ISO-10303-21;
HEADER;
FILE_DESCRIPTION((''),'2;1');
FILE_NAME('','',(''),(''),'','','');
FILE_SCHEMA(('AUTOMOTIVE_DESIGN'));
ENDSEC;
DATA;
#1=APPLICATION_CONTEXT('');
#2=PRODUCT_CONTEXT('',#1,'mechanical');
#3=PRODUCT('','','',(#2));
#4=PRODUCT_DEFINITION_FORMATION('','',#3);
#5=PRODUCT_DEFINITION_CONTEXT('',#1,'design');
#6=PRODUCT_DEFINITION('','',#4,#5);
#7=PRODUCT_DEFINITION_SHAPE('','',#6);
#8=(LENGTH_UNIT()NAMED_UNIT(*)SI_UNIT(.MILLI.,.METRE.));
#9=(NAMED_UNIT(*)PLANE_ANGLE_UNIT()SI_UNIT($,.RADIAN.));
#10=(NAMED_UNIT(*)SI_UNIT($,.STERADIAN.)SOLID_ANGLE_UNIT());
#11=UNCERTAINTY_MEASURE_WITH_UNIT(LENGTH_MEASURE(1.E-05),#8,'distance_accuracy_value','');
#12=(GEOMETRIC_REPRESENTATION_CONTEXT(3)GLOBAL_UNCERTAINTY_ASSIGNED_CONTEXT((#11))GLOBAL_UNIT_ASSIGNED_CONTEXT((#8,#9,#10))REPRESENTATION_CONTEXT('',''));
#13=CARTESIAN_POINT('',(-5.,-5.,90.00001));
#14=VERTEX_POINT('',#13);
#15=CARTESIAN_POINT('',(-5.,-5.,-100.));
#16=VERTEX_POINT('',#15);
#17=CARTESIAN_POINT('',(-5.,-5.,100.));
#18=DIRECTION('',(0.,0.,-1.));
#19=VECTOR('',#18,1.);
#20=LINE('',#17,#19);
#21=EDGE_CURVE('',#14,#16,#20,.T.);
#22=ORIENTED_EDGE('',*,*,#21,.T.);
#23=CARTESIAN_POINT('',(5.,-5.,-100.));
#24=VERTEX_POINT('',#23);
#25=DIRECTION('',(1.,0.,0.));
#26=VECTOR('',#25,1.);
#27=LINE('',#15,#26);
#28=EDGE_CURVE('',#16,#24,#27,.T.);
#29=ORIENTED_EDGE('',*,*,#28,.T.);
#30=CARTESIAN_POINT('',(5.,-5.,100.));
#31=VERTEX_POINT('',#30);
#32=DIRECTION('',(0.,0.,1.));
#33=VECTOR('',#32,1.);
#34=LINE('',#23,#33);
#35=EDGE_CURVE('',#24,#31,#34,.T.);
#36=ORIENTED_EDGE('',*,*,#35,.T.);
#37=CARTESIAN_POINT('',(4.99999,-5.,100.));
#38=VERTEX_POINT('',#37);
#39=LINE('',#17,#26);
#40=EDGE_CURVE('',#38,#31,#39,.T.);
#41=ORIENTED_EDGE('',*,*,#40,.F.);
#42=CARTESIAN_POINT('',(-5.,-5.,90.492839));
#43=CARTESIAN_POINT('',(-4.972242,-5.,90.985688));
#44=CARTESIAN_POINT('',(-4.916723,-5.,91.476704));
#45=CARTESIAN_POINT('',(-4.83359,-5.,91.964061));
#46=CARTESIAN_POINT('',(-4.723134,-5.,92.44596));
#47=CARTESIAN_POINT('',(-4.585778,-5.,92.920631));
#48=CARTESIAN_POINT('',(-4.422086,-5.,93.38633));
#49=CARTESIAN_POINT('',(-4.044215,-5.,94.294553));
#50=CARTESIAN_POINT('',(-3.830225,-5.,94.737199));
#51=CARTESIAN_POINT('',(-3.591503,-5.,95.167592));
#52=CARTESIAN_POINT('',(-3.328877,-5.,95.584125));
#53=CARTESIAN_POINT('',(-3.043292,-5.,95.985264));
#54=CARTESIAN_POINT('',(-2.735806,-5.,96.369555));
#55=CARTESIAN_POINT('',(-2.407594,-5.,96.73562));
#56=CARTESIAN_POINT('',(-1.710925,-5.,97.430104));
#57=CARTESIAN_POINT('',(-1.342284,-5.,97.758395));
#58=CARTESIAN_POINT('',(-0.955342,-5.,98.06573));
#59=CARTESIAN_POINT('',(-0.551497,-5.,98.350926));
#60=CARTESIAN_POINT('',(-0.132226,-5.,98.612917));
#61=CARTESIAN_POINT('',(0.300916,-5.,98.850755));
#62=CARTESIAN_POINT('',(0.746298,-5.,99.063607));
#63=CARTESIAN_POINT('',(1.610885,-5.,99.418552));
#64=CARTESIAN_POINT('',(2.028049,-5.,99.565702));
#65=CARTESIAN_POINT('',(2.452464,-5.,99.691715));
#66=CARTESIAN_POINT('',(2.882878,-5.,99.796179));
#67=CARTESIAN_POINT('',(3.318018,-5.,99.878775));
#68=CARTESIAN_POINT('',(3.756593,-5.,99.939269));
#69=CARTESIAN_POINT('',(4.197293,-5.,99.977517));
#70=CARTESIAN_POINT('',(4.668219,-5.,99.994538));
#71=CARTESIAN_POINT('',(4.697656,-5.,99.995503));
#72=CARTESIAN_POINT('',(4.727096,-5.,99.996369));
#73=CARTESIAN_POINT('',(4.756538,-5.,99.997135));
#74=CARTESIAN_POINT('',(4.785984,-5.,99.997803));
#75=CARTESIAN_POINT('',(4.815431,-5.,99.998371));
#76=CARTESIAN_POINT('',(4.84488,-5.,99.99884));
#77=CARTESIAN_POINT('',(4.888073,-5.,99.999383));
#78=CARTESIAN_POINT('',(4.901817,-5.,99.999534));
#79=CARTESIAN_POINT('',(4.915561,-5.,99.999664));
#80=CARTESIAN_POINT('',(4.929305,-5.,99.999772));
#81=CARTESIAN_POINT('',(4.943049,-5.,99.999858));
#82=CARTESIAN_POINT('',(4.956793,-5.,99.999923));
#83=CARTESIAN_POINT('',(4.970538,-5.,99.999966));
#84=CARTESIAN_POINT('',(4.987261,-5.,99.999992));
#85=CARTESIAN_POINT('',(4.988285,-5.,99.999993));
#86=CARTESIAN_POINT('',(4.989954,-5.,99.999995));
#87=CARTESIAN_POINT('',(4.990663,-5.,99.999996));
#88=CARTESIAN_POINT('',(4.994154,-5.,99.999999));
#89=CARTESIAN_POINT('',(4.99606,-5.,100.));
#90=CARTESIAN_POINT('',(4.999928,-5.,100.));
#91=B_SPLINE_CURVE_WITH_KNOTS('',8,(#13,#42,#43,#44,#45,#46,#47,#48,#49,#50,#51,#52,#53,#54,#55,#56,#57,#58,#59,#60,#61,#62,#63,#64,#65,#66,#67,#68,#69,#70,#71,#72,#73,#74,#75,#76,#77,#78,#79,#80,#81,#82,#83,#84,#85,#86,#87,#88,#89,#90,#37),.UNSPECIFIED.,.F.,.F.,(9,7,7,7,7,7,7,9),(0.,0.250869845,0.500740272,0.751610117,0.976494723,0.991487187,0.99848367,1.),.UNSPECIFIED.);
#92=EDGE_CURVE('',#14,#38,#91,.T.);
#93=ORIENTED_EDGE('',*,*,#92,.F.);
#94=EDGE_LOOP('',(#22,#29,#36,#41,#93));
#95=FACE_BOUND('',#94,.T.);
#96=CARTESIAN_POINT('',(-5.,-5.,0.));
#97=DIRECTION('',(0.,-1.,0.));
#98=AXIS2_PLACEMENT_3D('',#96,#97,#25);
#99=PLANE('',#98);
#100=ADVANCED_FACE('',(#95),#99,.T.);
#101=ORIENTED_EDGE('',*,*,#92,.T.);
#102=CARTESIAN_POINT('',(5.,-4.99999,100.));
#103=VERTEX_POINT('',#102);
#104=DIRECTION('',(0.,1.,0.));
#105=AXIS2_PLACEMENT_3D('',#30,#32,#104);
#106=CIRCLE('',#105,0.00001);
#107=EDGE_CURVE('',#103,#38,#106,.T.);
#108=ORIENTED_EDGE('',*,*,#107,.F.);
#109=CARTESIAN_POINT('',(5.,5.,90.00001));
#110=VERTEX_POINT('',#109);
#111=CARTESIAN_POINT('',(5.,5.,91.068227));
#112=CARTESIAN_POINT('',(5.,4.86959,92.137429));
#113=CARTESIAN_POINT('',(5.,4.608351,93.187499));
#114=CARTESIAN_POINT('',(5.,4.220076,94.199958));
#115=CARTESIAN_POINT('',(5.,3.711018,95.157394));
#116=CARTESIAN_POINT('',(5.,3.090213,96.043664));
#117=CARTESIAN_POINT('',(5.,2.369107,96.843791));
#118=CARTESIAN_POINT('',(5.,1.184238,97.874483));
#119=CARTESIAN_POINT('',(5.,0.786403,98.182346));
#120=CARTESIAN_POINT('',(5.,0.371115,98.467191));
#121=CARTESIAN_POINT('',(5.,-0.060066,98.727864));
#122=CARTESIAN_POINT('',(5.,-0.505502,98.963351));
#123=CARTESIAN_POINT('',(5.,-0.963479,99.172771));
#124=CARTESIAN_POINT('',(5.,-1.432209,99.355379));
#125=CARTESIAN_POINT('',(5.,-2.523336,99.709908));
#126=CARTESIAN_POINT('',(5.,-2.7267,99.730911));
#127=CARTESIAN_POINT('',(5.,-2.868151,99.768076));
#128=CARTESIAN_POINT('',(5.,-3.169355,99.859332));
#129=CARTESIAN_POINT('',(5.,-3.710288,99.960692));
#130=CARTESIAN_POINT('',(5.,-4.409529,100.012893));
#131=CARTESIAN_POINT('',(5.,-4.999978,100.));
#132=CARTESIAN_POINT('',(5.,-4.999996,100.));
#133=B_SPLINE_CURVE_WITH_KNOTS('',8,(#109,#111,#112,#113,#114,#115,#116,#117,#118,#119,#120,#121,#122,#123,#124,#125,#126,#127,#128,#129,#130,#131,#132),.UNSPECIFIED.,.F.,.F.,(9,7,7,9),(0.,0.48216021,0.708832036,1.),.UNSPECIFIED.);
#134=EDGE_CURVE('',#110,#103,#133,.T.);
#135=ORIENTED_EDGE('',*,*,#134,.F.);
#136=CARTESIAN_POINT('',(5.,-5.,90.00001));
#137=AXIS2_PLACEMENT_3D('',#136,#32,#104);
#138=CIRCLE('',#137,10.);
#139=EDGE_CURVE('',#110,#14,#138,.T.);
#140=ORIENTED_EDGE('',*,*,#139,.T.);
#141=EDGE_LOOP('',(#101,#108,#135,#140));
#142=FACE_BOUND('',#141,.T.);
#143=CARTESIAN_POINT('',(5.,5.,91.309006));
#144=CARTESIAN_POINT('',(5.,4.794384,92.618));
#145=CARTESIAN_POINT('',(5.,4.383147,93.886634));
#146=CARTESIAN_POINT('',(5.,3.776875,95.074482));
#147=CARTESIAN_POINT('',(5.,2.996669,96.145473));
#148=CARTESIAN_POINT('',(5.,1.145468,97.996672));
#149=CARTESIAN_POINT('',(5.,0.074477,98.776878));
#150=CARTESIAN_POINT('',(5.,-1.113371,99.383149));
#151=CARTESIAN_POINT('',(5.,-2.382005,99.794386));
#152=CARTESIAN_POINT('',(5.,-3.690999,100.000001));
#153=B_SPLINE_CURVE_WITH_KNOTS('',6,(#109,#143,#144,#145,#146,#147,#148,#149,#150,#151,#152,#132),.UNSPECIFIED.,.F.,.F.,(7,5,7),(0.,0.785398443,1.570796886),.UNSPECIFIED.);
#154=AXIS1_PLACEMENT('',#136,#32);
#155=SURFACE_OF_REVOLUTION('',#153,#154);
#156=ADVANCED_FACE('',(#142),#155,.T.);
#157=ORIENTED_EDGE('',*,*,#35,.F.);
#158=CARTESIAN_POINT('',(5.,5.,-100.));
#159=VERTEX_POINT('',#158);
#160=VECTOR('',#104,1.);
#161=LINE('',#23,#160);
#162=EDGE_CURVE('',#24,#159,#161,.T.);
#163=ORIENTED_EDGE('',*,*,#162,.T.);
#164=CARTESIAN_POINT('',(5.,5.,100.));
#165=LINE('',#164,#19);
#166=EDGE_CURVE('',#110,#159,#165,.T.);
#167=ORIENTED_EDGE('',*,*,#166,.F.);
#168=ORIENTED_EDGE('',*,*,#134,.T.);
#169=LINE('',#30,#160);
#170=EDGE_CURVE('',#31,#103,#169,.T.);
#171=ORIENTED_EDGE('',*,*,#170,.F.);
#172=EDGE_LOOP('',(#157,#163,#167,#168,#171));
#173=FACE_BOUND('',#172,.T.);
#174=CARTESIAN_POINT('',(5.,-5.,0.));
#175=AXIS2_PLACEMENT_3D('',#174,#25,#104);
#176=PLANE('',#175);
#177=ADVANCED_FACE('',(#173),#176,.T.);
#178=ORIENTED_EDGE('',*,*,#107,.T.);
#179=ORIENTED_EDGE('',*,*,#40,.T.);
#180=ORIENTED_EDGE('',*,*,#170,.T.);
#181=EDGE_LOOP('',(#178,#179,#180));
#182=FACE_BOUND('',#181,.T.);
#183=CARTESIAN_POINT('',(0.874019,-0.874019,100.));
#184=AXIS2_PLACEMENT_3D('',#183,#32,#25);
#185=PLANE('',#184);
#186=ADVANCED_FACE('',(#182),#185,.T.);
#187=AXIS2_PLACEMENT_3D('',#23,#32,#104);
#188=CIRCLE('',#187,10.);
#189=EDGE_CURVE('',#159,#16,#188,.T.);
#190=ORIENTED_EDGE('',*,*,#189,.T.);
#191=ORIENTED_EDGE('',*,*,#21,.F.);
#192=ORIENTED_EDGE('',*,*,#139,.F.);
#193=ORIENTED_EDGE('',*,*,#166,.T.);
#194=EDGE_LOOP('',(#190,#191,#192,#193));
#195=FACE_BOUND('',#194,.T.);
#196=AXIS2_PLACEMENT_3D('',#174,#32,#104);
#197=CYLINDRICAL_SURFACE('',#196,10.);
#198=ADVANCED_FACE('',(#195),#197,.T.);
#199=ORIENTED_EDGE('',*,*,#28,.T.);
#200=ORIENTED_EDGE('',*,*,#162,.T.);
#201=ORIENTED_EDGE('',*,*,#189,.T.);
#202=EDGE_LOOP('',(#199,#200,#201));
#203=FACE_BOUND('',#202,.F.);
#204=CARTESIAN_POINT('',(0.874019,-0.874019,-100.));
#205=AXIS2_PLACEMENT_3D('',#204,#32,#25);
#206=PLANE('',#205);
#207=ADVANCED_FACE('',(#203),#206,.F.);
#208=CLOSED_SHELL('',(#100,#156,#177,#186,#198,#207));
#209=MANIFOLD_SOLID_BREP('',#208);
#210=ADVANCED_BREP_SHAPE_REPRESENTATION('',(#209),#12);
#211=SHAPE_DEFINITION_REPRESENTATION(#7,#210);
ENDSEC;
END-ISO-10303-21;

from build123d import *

# Parameters (mm, degrees)
F1_DEPTH = 100
F2_R     = 9.99999


# Not quite as in the source:
# - a fillet or chamfer is up to 0.001 mm smaller than in the source, because OpenCascade refuses the exact size


with BuildPart() as f1:
    # F0 (on Top) → F1 (new body, symmetric)
    with BuildSketch(Plane.XY):
        with BuildLine():
            Line((-5, -5), (5, -5))
            Line((5, -5), (5, 5))
            ThreePointArc((5, 5), (-2.0710678119, 2.0710678119), (-5, -5))
        make_face()
    extrude(amount=F1_DEPTH, both=True)

    # F2 (radius 10 in the source; OpenCascade refuses exactly that, so slightly less here)
    f2_edges = [f1.edges().sort_by_distance(p)[0] for p in [
        (-2.071068, 2.071068, 100),
    ]]
    fillet(f2_edges, radius=F2_R)


solid = f1.part
